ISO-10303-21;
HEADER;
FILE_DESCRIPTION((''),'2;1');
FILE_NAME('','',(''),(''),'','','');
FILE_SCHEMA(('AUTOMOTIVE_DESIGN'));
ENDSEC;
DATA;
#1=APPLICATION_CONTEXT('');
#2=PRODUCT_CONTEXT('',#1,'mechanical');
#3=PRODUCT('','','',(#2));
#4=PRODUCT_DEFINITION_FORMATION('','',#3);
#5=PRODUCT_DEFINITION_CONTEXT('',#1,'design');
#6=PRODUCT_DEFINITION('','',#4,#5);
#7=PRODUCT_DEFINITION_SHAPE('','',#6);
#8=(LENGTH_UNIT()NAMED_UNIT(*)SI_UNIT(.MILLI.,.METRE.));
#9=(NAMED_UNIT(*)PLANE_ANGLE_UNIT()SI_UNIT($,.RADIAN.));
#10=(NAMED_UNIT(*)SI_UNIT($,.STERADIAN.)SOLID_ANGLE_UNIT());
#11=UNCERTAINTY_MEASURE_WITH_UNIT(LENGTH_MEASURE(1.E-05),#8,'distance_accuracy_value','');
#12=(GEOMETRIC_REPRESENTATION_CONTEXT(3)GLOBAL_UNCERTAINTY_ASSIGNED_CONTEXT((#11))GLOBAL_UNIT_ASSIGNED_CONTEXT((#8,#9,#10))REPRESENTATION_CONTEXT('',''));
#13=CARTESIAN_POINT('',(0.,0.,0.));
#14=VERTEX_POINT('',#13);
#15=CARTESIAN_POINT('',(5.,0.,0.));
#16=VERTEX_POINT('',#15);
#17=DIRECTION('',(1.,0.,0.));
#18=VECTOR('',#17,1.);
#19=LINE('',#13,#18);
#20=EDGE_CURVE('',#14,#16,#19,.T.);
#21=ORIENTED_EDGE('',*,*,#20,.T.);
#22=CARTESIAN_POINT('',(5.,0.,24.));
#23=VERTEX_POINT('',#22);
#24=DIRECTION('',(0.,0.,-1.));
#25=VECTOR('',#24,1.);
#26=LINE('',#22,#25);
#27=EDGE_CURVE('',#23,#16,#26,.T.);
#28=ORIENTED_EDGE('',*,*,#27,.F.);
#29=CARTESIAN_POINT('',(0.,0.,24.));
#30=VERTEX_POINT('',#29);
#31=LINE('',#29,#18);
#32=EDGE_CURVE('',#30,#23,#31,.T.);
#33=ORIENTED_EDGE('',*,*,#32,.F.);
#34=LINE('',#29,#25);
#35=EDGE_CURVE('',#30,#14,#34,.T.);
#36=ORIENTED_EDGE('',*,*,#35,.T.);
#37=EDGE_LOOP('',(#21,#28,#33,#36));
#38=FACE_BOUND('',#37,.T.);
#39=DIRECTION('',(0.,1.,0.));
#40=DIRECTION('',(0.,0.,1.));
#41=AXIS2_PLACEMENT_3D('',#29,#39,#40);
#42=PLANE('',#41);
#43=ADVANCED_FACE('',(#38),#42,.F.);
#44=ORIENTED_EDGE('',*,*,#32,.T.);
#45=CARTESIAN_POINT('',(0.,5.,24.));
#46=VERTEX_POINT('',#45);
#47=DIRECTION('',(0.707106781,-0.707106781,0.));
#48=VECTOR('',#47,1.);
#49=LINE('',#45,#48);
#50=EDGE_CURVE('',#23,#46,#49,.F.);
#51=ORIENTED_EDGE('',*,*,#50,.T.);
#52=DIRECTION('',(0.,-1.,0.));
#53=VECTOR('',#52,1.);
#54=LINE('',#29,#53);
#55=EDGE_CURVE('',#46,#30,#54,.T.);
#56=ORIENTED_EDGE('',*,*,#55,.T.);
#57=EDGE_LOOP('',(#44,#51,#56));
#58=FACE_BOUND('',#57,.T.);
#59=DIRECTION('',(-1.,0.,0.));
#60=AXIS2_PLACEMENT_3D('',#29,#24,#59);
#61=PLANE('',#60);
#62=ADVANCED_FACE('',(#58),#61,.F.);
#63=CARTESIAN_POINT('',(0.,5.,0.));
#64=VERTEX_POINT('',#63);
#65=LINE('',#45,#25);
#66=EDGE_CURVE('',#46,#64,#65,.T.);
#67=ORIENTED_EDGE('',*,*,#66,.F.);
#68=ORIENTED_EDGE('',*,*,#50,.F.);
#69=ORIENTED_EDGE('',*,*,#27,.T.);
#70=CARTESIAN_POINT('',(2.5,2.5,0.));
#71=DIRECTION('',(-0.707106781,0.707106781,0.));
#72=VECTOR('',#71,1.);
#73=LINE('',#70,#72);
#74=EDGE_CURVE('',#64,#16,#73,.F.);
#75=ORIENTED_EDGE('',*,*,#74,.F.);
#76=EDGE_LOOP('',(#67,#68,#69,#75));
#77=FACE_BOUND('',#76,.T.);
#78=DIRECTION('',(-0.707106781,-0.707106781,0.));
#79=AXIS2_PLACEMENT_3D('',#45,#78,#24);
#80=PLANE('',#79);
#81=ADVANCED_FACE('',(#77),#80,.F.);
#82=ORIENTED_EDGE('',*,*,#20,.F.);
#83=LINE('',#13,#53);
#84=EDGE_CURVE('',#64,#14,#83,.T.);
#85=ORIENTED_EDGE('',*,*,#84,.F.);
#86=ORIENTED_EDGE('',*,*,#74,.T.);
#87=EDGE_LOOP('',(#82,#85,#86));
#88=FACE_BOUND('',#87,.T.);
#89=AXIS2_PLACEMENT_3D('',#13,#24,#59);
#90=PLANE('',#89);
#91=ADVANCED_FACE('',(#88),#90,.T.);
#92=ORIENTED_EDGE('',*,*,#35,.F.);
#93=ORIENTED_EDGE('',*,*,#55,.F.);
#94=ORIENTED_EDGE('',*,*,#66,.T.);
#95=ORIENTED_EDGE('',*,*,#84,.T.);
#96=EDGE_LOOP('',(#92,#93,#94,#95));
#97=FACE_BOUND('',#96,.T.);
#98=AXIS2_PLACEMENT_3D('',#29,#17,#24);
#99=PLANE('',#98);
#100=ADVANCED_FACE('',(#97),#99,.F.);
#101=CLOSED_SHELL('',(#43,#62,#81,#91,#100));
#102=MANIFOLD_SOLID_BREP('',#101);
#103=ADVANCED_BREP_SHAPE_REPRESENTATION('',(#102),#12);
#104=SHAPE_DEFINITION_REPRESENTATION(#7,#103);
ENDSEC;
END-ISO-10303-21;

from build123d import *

# Parameters (mm, degrees)
SKETCH_1_W      = 5
SKETCH_1_H      = 5
EXTRUDE_1_DEPTH = 24
CHAMFER_1_SIZE  = 5


with BuildPart() as part:
    # ｽｹｯﾁ1 → ﾎﾞｽ - 押し出し1 (new body)
    with BuildSketch(Plane.XY):
        with Locations((2.5, 2.5)):
            Rectangle(SKETCH_1_W, SKETCH_1_H)
    extrude(amount=EXTRUDE_1_DEPTH)

    # 面取り1
    chamfer_1_edges = [part.edges().sort_by_distance(p)[0] for p in [
        (5, 5, 12),
    ]]
    chamfer(chamfer_1_edges, length=CHAMFER_1_SIZE - 0.0001)  # a hair under: the kernel refuses the full size


solid = part.part
